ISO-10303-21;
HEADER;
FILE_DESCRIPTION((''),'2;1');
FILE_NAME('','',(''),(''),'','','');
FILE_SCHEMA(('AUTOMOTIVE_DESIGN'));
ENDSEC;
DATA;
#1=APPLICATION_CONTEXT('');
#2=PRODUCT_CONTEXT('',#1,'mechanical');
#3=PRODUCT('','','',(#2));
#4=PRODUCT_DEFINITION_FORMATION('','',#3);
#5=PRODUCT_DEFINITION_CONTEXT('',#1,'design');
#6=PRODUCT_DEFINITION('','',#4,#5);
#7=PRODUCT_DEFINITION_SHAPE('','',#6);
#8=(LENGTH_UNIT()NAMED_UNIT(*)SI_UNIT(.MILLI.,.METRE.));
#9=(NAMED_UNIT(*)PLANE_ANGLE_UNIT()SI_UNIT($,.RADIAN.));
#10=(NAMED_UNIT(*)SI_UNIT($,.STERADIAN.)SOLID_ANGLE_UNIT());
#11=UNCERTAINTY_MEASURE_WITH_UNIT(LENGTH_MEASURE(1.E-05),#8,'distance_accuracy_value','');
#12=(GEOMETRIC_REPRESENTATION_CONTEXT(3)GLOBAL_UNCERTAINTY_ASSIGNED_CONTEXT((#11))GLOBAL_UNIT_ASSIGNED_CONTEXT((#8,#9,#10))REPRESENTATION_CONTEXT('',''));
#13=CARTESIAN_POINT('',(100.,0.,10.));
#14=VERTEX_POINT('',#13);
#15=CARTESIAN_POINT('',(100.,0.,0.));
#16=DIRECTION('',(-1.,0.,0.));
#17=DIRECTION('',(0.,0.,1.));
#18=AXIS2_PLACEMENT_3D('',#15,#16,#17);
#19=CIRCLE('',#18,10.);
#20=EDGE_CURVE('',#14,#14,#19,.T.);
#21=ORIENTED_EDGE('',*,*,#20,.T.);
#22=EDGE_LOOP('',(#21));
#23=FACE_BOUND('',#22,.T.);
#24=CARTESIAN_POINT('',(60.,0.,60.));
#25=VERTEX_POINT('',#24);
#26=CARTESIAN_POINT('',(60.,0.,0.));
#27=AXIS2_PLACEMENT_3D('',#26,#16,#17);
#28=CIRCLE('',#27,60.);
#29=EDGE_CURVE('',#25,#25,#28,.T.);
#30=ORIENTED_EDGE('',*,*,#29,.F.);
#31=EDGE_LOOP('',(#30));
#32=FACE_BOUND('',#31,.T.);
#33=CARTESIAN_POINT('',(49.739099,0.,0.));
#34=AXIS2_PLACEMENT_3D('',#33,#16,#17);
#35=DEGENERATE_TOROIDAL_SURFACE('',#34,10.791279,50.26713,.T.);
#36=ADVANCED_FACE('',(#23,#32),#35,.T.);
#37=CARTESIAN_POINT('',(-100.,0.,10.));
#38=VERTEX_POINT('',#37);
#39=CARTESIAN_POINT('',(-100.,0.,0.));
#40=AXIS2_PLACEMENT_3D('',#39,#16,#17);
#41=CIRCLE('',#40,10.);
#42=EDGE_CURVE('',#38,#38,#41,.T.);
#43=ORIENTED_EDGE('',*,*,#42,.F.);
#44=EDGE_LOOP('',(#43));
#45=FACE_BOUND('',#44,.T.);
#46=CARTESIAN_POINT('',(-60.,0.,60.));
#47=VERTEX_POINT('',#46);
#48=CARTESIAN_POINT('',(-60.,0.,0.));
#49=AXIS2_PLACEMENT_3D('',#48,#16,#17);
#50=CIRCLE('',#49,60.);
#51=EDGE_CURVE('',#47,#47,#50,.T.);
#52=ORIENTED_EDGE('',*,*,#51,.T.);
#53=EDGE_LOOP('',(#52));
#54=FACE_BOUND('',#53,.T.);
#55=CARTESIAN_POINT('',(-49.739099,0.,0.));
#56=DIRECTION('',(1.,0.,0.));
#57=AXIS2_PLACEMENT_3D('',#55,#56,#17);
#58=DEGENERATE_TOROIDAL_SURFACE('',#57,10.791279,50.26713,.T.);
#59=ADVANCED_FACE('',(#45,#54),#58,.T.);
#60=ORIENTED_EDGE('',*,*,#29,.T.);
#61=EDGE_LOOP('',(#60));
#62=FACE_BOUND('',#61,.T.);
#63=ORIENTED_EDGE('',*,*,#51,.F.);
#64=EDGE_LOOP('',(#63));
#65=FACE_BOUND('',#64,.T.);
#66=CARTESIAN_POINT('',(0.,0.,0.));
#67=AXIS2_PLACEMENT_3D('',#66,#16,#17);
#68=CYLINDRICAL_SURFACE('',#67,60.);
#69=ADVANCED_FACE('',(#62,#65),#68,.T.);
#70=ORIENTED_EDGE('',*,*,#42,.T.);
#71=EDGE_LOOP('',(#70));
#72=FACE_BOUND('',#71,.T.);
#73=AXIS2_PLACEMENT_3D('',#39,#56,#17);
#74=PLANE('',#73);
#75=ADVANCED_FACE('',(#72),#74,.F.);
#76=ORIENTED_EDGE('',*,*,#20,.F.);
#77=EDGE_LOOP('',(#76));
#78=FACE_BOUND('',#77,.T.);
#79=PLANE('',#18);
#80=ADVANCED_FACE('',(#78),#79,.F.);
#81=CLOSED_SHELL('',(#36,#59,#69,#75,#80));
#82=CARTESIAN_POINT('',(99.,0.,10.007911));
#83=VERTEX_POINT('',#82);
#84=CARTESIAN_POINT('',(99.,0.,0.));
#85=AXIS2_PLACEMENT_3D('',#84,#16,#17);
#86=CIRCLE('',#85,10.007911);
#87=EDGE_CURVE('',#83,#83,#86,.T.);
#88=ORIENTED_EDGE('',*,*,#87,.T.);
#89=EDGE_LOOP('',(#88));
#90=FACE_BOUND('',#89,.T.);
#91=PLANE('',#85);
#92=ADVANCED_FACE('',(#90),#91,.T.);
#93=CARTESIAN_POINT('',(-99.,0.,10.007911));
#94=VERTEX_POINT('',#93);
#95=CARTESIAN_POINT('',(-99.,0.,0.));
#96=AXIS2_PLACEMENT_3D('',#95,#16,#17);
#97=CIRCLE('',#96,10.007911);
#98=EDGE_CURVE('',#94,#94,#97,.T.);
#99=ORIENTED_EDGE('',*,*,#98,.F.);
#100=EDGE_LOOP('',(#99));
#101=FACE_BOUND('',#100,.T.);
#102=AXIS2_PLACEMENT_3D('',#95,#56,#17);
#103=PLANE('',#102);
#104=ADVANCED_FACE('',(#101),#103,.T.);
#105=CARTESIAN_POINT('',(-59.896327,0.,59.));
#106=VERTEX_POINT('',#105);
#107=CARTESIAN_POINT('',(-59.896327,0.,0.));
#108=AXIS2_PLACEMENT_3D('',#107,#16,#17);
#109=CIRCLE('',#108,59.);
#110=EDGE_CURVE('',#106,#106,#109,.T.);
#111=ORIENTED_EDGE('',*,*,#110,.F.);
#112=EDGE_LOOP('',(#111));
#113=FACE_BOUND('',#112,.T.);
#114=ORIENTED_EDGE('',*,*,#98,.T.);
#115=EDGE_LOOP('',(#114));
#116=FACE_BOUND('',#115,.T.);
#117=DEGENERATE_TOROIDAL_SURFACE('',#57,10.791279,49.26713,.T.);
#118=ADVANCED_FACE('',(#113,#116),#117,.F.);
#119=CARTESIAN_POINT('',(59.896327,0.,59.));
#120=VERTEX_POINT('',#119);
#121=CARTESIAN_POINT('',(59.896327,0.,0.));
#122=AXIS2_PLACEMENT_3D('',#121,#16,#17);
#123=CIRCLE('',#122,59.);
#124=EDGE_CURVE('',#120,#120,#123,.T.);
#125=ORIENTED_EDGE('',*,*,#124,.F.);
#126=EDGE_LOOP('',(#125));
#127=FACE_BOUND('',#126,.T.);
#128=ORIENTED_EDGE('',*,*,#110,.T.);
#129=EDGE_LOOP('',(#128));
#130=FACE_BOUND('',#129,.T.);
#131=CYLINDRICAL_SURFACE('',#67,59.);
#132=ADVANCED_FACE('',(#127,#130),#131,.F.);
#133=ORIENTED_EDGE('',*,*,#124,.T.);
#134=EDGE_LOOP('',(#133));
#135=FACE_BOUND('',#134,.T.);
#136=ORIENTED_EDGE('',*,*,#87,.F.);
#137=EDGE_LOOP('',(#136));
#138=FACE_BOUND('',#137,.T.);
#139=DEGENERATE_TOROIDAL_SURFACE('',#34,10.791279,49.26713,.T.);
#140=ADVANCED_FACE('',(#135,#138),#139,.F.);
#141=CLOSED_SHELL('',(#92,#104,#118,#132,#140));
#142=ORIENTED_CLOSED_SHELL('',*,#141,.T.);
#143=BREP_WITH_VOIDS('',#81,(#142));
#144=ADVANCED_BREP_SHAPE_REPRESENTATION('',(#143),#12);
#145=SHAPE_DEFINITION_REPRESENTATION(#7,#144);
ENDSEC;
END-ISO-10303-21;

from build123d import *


with BuildPart() as part:
    # Sketch1 → Revolve-Thin1 (revolve)
    with BuildSketch(Plane(origin=(0, 0, 0), x_dir=(1, 0, 0), z_dir=(0, 1, 0))):
        with BuildLine():
            Line((0, 59), (59.896326585, 59))
            ThreePointArc((59.896326585, 59), (88.244744032, 41.525060748), (99, 10.007910772))
            Line((99, 10.007910772), (99, 0))
            Line((99, 0), (100, 0))
            Line((100, 0), (100, 10))
            ThreePointArc((100, 10), (88.991132396, 42.192905916), (60, 60))
            Line((60, 60), (0, 60))
            Line((0, 60), (0, 59))
        make_face()
    revolve_thin1 = revolve(axis=Axis((0, 0, 0), (1, 0, 0)))

    # Mirror1: Revolve-Thin1 across plane
    add(revolve_thin1.mirror(Plane(origin=(0, 0, -59), x_dir=(0, 0, 1), z_dir=(-1, 0, 0))))


solid = part.part
